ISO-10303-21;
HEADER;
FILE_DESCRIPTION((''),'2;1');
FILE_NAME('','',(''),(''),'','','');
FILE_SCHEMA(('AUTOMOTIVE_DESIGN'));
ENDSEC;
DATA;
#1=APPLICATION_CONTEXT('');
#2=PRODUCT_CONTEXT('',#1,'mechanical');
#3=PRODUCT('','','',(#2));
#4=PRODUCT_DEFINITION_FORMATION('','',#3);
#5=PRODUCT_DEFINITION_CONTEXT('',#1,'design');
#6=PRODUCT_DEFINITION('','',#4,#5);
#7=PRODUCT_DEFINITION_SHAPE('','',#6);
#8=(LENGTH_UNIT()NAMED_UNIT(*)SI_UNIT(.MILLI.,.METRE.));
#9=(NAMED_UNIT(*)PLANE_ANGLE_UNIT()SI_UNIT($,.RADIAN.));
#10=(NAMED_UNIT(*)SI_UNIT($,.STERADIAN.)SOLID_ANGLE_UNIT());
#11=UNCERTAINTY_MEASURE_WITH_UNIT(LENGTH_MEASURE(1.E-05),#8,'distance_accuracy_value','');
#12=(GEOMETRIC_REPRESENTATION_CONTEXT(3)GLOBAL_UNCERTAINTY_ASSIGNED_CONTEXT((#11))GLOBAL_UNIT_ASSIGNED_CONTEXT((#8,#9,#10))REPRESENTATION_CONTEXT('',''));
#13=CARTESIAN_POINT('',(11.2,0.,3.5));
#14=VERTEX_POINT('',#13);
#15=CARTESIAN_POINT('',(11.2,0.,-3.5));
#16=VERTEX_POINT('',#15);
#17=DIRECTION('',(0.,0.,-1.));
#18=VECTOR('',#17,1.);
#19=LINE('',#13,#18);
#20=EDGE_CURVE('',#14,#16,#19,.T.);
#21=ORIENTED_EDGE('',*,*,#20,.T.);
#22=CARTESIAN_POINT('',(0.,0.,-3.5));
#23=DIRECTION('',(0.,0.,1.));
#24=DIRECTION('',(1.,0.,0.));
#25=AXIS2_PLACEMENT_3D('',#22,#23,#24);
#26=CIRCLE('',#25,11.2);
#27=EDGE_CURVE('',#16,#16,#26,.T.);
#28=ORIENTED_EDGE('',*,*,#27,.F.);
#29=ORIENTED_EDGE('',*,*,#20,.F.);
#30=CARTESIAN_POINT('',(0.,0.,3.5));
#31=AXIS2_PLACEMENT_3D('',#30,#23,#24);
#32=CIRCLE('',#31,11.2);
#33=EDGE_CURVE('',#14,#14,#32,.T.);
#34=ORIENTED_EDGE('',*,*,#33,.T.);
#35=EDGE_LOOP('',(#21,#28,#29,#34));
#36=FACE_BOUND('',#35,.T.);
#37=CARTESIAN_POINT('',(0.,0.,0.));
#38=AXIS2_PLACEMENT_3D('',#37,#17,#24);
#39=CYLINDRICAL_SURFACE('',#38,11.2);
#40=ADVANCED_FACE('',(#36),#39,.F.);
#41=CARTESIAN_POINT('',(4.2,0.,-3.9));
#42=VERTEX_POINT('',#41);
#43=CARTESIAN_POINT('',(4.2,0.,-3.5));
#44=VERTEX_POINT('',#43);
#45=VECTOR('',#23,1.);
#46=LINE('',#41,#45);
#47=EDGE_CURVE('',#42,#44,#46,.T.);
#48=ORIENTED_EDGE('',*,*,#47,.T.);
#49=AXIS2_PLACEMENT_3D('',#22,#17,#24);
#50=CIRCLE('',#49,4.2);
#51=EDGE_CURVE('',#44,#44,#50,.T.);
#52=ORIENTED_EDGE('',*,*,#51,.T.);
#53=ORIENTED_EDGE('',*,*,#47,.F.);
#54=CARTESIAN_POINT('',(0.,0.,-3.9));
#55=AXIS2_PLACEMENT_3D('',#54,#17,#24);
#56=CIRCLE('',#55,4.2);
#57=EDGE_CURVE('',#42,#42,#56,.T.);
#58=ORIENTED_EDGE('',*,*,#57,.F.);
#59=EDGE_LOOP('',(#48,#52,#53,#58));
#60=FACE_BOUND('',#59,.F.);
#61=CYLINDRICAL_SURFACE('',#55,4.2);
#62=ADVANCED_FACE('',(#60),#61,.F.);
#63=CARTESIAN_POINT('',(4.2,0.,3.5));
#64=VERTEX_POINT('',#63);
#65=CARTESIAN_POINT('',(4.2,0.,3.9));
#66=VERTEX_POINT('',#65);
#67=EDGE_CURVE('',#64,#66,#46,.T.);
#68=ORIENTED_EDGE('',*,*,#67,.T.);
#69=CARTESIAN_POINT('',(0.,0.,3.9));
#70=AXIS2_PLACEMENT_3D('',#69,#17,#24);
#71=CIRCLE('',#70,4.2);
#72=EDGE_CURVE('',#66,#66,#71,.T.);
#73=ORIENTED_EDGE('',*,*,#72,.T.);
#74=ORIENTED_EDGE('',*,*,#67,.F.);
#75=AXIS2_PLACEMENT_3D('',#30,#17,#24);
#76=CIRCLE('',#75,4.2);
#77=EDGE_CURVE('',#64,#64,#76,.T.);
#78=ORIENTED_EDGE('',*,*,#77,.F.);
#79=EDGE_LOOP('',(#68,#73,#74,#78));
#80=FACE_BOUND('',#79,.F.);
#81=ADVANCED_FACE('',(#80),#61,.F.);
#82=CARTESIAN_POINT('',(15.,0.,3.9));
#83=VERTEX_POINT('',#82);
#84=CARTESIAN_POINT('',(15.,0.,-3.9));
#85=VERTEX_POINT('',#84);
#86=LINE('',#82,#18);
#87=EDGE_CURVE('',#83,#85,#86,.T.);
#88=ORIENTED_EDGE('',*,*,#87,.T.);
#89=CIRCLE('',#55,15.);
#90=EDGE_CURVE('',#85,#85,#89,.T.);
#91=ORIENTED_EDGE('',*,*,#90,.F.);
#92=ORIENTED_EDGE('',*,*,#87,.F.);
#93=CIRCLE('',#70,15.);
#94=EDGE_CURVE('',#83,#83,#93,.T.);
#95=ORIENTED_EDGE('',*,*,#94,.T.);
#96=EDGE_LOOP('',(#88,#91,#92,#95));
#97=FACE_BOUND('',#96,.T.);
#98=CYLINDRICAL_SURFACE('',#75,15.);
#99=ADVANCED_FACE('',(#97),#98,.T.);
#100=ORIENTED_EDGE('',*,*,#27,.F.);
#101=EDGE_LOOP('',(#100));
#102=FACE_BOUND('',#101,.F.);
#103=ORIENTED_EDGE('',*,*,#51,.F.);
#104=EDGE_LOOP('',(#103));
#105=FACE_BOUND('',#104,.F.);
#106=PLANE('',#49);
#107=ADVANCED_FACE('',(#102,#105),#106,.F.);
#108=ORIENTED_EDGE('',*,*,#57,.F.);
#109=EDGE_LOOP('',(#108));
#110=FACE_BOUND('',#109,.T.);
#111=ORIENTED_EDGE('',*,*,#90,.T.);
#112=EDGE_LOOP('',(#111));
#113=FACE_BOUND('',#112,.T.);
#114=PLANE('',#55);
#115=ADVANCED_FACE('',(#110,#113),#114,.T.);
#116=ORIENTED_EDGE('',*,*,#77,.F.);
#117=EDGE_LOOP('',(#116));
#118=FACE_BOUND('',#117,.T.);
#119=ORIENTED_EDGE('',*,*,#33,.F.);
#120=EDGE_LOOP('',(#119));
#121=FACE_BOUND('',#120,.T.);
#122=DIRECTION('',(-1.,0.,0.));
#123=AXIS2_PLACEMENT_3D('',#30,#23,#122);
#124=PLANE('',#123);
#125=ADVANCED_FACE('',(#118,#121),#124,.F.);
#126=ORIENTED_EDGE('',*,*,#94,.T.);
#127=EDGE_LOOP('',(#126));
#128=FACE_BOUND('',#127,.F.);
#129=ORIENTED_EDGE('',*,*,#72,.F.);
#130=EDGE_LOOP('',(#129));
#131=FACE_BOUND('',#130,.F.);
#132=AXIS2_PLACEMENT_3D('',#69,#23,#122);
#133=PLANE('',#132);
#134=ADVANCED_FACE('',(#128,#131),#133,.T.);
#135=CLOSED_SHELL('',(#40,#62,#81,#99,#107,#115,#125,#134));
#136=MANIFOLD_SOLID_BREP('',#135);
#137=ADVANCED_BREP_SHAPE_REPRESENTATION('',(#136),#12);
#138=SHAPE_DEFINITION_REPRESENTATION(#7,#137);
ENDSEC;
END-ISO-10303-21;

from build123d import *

# Parameters (mm, degrees)
F0_R     = 15
F0_R_2   = 11.2
F1_DEPTH = 3.5
F2_R     = 15
F3_DEPTH = 0.4
F4_R     = 4.2
F5_DEPTH = 7.801


# Not quite as in the source:
# - a pattern or mirror of a feature is missing from the dataset's text; its kind, count and spacing are read off the source's solid


with BuildPart() as f1:
    # F0 (on Top) → F1 (new body, symmetric)
    with BuildSketch(Plane.XY):
        Circle(F0_R)
        Circle(F0_R_2, mode=Mode.SUBTRACT)
    extrude(amount=F1_DEPTH, both=True)

    # F2 (on face) → F3 (join)
    with BuildSketch(Plane(origin=(0, 0, -3.5), x_dir=(1, 0, 0), z_dir=(0, 0, -1))):
        Circle(F2_R)
    f3 = extrude(amount=F3_DEPTH)

    # F3_copies: F3 across plane
    add(f3.mirror(Plane.XY))

    # F4 (on face) → F5 (cut, through all)
    with BuildSketch(Plane(origin=(0, 0, -3.9), x_dir=(1, 0, 0), z_dir=(0, 0, -1))):
        Circle(F4_R)
    extrude(amount=-F5_DEPTH, mode=Mode.SUBTRACT)


solid = f1.part
